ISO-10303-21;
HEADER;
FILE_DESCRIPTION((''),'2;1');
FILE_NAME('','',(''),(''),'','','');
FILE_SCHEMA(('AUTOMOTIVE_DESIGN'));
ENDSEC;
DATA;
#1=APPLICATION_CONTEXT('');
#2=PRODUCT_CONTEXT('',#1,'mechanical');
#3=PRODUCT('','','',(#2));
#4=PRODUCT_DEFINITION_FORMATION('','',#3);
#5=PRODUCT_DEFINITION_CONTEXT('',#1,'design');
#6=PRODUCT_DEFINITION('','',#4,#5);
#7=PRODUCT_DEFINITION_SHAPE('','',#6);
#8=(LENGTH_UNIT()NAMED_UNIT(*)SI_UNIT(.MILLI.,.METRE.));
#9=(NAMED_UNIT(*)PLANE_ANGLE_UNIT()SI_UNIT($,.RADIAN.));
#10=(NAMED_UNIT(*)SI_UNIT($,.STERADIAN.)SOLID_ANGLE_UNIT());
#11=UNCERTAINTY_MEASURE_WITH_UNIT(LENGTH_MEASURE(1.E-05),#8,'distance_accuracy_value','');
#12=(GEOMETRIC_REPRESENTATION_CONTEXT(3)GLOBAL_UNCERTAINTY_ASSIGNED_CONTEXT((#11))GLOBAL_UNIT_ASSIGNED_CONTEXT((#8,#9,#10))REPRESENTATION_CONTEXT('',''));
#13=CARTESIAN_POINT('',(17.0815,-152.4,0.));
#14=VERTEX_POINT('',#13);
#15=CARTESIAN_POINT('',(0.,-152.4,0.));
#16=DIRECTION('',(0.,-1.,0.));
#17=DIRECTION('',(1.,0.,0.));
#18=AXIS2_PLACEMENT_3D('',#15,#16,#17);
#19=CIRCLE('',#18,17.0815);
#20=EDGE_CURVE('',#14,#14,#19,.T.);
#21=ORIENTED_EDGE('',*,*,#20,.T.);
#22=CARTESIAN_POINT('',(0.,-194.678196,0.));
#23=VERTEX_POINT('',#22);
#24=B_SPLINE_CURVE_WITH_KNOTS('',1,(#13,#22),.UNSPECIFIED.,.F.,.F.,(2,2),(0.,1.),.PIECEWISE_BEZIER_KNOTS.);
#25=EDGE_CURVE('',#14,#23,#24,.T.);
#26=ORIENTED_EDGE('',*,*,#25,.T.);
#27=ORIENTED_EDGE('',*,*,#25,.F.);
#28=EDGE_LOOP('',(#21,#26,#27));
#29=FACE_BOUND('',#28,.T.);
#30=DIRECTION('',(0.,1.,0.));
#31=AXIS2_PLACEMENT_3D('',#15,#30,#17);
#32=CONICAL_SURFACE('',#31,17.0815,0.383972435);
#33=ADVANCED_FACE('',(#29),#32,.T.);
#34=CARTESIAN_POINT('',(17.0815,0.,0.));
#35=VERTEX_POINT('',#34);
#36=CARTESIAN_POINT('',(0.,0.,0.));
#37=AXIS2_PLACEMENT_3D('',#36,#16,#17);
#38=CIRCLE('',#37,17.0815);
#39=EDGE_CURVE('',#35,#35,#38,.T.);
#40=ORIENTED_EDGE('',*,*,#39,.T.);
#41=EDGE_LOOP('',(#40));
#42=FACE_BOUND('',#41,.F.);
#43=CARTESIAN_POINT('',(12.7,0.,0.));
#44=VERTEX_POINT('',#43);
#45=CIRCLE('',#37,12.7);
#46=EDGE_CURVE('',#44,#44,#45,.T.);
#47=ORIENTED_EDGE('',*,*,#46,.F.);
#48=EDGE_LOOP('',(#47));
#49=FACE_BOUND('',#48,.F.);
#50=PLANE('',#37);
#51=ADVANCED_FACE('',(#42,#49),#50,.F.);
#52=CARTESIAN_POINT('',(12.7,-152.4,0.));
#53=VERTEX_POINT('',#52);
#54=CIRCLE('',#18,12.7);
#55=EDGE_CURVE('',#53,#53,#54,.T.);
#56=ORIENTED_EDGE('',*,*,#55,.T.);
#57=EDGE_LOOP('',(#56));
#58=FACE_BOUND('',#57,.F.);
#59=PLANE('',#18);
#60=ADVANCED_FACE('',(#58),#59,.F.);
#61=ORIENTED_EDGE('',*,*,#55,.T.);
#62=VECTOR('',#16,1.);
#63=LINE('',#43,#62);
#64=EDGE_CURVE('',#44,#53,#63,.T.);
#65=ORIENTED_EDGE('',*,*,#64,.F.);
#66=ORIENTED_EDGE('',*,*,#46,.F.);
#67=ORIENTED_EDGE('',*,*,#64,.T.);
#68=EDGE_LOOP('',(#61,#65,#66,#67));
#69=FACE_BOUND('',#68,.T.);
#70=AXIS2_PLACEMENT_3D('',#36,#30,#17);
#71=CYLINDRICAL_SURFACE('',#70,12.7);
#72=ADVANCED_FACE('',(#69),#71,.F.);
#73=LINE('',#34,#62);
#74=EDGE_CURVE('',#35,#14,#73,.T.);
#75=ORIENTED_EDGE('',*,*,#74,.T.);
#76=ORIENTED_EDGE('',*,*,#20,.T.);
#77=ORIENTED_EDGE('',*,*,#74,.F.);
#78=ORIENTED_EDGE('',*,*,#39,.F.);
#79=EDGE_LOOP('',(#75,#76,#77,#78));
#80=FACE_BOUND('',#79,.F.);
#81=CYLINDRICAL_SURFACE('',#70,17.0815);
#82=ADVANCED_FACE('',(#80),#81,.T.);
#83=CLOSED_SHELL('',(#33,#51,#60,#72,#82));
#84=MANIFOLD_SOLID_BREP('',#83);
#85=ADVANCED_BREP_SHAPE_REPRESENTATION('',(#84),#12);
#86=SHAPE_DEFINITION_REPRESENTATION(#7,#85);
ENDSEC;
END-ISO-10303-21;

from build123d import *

# Parameters (mm, degrees)
F0_R     = 17.0815
F0_R_2   = 12.7
F1_DEPTH = 152.4
F2_R     = 17.0815


# Not quite as in the source:
# - an extrude whose draft closes it to a point is written as a loft to that point


with BuildPart() as f1:
    # F0 (on Front) → F1 (new body)
    with BuildSketch(Plane.XZ):
        Circle(F0_R)
        Circle(F0_R_2, mode=Mode.SUBTRACT)
    extrude(amount=F1_DEPTH)

    # F2 (on face) → F3 section 0
    with BuildSketch(Plane.XZ.offset(152.4), mode=Mode.PRIVATE) as f3_s0:
        Circle(F2_R)
    loft([f3_s0.sketch, Vertex(0, -194.6781960866, 0)], ruled=True)


solid = f1.part
